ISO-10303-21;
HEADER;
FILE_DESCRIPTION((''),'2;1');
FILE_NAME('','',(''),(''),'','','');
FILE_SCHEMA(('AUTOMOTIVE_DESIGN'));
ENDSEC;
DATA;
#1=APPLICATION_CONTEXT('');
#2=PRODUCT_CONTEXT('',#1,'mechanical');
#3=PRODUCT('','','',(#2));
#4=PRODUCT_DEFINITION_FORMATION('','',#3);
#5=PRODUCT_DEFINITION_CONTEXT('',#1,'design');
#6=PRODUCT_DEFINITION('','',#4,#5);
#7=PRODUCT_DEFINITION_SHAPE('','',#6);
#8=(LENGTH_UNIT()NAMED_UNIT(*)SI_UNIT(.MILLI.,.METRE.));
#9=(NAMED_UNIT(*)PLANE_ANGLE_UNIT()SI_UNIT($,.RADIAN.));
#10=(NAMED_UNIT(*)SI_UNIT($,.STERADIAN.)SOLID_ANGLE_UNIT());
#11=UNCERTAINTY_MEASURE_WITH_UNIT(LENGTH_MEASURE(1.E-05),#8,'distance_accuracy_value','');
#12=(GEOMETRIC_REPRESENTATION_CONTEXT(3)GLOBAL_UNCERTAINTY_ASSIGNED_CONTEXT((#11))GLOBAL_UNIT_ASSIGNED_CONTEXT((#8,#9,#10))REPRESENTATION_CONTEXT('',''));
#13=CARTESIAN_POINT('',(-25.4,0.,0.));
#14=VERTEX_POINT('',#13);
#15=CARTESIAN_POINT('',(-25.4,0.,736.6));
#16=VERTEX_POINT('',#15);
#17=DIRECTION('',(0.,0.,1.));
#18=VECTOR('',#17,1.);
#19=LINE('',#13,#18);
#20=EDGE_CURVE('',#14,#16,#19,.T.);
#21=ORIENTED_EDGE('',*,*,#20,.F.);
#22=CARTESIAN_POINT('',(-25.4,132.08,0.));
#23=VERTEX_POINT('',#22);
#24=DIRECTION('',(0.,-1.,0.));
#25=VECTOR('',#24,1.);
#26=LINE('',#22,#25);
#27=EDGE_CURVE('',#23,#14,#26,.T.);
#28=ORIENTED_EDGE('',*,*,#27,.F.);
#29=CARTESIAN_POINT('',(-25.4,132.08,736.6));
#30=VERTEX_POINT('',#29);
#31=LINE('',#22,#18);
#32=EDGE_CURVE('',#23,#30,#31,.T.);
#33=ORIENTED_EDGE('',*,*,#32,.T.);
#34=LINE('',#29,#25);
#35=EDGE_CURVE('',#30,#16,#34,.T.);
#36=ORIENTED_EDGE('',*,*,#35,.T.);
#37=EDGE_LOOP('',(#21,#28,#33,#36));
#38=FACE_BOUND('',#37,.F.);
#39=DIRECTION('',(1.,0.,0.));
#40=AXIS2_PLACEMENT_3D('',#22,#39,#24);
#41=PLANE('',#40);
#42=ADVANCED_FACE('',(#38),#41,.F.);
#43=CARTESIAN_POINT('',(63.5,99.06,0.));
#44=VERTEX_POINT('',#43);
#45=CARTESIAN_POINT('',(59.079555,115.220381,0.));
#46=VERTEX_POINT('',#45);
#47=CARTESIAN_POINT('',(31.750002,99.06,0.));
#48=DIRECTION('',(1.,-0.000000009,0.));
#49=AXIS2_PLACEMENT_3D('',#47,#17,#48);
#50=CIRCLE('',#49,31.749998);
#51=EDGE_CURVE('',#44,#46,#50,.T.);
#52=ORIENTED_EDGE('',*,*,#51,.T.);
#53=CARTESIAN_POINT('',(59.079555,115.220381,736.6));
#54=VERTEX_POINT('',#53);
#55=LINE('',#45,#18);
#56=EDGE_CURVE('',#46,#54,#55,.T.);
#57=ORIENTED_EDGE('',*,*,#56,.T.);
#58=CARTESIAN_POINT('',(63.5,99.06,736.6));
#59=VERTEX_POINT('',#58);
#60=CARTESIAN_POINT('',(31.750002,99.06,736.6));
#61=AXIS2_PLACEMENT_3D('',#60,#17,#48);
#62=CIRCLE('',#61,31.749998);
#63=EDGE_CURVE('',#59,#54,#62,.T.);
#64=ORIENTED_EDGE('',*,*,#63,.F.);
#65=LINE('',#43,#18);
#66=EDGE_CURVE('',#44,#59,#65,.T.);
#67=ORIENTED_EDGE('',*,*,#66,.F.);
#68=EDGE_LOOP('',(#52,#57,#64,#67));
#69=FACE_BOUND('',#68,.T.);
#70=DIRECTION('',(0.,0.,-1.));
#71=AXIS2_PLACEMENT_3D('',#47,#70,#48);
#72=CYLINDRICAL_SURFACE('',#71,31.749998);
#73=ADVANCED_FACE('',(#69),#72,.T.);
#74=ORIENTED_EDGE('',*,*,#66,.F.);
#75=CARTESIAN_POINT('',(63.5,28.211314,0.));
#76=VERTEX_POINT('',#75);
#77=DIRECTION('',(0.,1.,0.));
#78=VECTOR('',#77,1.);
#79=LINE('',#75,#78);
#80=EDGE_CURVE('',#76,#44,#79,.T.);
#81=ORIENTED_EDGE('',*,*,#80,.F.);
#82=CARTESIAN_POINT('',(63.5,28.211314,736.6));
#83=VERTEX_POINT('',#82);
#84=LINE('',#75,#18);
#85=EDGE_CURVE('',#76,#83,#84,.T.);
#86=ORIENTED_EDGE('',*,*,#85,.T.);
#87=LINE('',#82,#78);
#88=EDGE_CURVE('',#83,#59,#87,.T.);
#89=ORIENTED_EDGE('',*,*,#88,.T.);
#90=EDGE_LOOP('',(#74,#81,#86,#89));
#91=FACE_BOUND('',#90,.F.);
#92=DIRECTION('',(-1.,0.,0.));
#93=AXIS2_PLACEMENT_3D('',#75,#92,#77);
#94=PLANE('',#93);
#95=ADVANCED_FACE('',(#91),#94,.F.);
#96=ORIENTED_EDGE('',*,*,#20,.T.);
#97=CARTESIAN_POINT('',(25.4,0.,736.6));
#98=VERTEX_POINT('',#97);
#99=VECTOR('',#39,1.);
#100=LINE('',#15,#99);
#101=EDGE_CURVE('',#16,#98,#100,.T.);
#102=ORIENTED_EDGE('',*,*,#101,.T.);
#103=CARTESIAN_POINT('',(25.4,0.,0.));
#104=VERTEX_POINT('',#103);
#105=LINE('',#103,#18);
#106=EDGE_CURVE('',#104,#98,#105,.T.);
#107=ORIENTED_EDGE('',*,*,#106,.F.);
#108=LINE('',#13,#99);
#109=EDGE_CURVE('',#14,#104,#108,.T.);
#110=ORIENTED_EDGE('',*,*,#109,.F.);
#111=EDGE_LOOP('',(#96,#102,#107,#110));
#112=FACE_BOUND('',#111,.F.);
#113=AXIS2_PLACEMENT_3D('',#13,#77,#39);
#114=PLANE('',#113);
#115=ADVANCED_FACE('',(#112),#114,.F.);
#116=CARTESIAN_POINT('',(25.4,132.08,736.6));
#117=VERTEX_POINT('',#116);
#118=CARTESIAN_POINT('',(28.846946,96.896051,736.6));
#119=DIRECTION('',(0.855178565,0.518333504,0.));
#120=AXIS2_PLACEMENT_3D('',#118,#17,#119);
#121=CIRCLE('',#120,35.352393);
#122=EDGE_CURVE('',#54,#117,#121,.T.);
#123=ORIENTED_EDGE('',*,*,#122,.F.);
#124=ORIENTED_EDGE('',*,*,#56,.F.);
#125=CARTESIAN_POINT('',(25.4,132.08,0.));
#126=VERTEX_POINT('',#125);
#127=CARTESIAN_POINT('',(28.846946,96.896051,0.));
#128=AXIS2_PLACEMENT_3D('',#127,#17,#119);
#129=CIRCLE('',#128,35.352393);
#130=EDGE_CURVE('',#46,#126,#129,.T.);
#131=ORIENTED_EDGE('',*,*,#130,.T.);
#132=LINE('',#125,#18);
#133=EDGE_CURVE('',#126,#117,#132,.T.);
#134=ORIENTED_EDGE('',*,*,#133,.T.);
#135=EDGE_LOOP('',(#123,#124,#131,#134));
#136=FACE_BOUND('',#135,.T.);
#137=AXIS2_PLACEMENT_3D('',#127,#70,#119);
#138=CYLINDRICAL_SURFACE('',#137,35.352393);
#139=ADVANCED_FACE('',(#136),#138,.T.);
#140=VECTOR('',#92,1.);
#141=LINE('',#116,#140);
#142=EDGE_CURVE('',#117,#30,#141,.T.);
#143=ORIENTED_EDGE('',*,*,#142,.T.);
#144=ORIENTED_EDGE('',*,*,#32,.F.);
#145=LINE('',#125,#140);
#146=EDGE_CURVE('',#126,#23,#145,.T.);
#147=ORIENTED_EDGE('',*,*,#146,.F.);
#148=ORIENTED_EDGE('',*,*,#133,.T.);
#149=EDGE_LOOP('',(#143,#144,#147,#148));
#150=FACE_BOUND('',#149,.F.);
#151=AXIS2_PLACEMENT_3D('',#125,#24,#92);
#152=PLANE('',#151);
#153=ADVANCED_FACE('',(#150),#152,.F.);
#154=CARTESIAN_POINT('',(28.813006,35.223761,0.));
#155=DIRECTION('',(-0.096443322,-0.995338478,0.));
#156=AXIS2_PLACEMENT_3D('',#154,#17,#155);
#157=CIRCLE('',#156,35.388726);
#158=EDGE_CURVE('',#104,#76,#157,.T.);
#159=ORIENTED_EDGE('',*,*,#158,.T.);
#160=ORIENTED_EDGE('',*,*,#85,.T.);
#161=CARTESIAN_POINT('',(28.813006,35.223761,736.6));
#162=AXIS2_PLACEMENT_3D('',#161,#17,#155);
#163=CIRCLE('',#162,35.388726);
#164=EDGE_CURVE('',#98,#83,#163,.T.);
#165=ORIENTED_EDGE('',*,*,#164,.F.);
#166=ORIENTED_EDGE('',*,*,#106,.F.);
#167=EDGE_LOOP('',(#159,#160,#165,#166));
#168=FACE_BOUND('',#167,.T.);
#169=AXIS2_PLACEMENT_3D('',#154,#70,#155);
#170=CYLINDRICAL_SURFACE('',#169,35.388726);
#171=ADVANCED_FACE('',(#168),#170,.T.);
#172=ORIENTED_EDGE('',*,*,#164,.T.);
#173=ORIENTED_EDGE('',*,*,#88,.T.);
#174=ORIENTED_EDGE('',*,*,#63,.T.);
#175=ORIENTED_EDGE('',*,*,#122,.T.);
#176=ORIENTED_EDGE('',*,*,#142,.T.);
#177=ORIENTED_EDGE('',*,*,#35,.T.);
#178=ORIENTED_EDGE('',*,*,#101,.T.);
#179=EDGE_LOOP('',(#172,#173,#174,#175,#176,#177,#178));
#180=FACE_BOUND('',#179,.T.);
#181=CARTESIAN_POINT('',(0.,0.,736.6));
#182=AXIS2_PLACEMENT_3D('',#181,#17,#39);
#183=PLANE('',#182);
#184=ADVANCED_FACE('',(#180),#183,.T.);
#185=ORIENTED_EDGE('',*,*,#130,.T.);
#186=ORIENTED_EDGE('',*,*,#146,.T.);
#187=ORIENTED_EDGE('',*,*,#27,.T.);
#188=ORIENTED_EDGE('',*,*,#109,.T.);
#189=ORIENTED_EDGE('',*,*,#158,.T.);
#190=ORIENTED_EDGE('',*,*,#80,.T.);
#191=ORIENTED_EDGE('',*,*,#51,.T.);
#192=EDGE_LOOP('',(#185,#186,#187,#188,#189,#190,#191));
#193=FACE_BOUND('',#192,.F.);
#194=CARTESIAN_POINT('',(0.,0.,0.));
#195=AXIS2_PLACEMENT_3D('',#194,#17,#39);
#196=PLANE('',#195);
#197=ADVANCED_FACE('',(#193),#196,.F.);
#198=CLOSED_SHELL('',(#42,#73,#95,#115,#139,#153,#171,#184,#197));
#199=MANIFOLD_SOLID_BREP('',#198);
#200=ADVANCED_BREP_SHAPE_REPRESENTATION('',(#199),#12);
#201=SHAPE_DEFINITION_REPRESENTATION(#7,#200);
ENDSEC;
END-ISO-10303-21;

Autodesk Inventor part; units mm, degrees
ref_plane "YZ Plane" through (0, 0, 0) normal (1, 0, 0) x (0, 1, 0)
ref_plane "XZ Plane" through (0, 0, 0) normal (0, 1, 0) x (-1, 0, 0)
ref_plane "XY Plane" through (0, 0, 0) normal (0, 0, 1) x (1, 0, 0)
sketch "Sketch1" plane through (0, 0, 0) normal (0, 0, 1) x (1, 0, 0)
  line L0 (0, 0) -> (0, 132.08)
  line L1 (0, 132.08) -> (25.4, 132.08)
  line L2 (0, 66.04) -> (63.5, 66.04)
  line L3 (0, 132.08) -> (0, 66.04)
  line L4 (0, 99.06) -> (31.75, 99.06)
  arc A0 (63.5, 99.06) -> (55.043838, 120.634513) centre (31.75, 99.06) ccw
  line L5 (0, 66.04) -> (0, 0)
  arc A1 (54.194148, 10.562869) -> (63.5, 33.02) centre (31.75, 33.02) ccw
  line L6 (63.5, 28.211314) -> (63.5, 99.06)
  arc A2 (59.079555, 115.220381) -> (25.4, 132.08) centre (28.846947, 96.896052) ccw
  line L7 (0, 0) -> (25.4, 0)
  arc A3 (25.4, 0) -> (63.5, 28.211314) centre (28.813006, 35.223762) ccw
  line L8 (0, 132.08) -> (-25.4, 132.08)
  line L9 (0, 1.27) -> (0, 132.08)
  line L10 (0, 132.08) -> (-25.4, 132.08)
  line L11 (-25.4, 132.08) -> (-25.4, 1.27)
  line L12 (-25.4, 0) -> (0, 0)
  line L13 (0, 0) -> (0, 132.08)
  line L14 (0, 132.08) -> (-25.4, 132.08)
  line L15 (-25.4, 132.08) -> (-25.4, 0)
  dimension "d0" = 132.08
  dimension "d1" = 25.4
  dimension "d2" = 63.5
  dimension "d3" = 25.4
  dimension "d4" = 25.4
sketch "Sketch1 outline for Extrusion1" plane through (0, 0, 0) normal (0, 0, 1) x (1, 0, 0)
  line L0 (-25.4, 0) -> (25.4, 0)
  arc A0 (25.4, 0) -> (63.5, 28.211314) centre (28.813006, 35.223762) ccw
  line L1 (63.5, 28.211314) -> (63.5, 99.06)
  arc A1 (63.5, 99.06) -> (59.079555, 115.220381) centre (31.75, 99.06) ccw
  arc A2 (59.079555, 115.220381) -> (25.4, 132.08) centre (28.846947, 96.896052) ccw
  line L2 (25.4, 132.08) -> (-25.4, 132.08)
  line L3 (-25.4, 132.08) -> (-25.4, 0)
extrude "Extrusion1" add sketch "Sketch1 outline for Extrusion1" along normal blind 736.6
properties part number "Chassis_Bumper(29in)"
